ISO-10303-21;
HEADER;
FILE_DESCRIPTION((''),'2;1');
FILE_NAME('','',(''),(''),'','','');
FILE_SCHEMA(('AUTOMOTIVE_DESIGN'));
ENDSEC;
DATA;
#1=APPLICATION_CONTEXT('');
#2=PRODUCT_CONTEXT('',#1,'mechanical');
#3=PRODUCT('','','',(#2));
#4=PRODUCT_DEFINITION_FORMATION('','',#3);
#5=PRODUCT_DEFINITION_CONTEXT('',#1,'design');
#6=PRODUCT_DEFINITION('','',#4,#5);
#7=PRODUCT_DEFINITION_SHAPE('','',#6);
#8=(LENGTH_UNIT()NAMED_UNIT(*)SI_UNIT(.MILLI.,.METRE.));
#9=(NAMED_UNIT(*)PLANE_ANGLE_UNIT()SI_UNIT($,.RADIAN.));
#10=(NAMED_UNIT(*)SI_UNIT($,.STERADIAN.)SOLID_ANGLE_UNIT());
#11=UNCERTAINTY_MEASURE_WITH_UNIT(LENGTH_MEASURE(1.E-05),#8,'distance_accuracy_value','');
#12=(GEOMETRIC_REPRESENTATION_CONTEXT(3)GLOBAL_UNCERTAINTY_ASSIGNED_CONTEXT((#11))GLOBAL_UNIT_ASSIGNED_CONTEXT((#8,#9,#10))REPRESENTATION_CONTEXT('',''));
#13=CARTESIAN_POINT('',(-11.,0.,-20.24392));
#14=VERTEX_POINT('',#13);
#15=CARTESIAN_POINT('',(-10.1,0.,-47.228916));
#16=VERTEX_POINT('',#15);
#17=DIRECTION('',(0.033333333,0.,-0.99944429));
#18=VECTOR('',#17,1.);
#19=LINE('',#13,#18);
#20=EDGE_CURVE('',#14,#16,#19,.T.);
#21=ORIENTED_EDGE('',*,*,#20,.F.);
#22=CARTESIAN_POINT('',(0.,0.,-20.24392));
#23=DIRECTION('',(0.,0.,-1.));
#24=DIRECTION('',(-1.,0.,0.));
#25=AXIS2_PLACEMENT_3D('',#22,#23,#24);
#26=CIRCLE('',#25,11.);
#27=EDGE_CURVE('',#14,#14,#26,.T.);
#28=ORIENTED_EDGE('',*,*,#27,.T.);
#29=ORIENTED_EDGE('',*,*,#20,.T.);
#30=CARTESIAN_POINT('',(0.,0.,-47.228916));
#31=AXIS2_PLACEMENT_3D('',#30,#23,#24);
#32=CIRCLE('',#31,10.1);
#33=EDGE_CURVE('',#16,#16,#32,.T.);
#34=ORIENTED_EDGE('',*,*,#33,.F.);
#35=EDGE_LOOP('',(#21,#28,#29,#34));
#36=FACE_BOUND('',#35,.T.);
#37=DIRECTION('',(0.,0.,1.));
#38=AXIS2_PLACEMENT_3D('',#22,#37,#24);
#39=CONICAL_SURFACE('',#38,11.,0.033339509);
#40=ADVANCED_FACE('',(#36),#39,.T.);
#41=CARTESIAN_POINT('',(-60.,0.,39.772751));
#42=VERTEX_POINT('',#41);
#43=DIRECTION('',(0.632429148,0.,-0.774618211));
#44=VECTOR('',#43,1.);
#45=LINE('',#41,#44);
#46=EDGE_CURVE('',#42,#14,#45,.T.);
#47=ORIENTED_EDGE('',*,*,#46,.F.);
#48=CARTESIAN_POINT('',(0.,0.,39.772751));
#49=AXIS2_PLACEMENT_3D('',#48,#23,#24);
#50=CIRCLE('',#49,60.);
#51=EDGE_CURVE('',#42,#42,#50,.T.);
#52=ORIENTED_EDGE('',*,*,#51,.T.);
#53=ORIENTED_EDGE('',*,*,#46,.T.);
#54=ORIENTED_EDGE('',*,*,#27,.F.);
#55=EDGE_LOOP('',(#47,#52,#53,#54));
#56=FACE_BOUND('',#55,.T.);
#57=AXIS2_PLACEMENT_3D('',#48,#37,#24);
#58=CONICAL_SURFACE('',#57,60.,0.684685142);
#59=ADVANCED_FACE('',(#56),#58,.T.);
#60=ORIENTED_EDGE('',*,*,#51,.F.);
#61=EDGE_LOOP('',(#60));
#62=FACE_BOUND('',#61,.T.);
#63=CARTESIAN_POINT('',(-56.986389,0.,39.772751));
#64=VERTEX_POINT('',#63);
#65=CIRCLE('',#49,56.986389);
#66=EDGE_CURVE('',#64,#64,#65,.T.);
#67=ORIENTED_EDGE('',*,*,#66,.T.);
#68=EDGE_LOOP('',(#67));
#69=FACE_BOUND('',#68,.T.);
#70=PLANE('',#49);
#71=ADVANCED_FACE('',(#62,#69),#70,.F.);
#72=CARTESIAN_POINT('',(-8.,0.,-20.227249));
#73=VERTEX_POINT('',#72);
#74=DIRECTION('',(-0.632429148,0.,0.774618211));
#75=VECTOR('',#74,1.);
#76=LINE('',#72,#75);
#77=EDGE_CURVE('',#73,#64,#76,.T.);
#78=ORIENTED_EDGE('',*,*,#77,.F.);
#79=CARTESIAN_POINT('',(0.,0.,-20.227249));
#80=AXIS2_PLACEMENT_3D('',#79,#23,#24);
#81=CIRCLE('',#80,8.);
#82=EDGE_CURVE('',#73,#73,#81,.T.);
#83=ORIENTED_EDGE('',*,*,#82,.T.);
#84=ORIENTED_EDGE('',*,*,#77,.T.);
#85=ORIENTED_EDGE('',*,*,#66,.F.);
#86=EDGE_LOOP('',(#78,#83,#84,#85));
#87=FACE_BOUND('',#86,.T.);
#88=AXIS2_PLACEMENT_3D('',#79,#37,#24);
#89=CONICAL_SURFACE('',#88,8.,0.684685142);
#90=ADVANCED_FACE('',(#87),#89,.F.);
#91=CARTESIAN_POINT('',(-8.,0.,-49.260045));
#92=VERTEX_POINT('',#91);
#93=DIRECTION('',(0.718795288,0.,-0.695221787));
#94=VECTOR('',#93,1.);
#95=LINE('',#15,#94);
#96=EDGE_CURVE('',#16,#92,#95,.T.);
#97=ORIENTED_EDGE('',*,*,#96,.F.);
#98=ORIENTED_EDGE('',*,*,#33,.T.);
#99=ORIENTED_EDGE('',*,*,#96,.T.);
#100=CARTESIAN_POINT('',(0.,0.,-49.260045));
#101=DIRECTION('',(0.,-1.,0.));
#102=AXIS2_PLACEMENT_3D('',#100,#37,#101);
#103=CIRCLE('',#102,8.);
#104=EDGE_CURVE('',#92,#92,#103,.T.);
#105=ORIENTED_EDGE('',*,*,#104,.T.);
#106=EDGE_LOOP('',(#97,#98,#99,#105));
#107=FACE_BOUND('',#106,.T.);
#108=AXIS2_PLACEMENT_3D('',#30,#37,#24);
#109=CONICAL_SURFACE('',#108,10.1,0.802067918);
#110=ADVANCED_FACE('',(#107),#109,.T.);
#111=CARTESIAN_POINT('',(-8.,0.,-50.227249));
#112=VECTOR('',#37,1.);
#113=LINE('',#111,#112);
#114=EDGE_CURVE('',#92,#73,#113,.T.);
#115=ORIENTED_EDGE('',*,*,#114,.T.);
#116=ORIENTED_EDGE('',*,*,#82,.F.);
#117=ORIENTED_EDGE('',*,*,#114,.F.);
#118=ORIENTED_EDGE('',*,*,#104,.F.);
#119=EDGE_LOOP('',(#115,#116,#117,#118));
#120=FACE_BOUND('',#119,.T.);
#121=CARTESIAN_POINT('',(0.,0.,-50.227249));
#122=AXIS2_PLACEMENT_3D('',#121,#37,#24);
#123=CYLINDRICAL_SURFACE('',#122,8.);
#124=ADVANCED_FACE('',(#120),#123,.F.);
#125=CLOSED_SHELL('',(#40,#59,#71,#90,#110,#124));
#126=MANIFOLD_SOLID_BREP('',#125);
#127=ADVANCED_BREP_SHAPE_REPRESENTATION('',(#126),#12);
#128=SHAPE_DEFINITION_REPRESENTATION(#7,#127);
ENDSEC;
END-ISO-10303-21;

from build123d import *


# Not quite as in the source:
# - a fillet or chamfer that OpenCascade refuses, or shapes differently, is made with other operations: its cross-section is extruded or revolved along the edge and cut away or added


with BuildPart() as f2:
    # F0 (on Front) → F2 (revolve)
    with BuildSketch(Plane.XZ):
        Polygon((-10, -50.2272490659), (-8, -50.2272490659), (-8, -20.2272490659), (-56.9863888878, 39.7727509341), (-60, 39.7727509341), (-11, -20.2439203648), align=None)
    revolve(axis=Axis((0, 0, -35.9380319715), (0, 0, -1)))

    # F3: chamfer of 3 on 1 edges, made by hand

    # F3_s1 → F3_t2 (revolve, cut)
    with BuildSketch(Plane.XZ):
        Polygon((-10.1, -47.2289161958), (-7, -50.2272490659), (-10, -50.2272490659), align=None)
    revolve(axis=Axis((0, 0, -50.2272490659), (0, 0, -1)), mode=Mode.SUBTRACT)


solid = f2.part
